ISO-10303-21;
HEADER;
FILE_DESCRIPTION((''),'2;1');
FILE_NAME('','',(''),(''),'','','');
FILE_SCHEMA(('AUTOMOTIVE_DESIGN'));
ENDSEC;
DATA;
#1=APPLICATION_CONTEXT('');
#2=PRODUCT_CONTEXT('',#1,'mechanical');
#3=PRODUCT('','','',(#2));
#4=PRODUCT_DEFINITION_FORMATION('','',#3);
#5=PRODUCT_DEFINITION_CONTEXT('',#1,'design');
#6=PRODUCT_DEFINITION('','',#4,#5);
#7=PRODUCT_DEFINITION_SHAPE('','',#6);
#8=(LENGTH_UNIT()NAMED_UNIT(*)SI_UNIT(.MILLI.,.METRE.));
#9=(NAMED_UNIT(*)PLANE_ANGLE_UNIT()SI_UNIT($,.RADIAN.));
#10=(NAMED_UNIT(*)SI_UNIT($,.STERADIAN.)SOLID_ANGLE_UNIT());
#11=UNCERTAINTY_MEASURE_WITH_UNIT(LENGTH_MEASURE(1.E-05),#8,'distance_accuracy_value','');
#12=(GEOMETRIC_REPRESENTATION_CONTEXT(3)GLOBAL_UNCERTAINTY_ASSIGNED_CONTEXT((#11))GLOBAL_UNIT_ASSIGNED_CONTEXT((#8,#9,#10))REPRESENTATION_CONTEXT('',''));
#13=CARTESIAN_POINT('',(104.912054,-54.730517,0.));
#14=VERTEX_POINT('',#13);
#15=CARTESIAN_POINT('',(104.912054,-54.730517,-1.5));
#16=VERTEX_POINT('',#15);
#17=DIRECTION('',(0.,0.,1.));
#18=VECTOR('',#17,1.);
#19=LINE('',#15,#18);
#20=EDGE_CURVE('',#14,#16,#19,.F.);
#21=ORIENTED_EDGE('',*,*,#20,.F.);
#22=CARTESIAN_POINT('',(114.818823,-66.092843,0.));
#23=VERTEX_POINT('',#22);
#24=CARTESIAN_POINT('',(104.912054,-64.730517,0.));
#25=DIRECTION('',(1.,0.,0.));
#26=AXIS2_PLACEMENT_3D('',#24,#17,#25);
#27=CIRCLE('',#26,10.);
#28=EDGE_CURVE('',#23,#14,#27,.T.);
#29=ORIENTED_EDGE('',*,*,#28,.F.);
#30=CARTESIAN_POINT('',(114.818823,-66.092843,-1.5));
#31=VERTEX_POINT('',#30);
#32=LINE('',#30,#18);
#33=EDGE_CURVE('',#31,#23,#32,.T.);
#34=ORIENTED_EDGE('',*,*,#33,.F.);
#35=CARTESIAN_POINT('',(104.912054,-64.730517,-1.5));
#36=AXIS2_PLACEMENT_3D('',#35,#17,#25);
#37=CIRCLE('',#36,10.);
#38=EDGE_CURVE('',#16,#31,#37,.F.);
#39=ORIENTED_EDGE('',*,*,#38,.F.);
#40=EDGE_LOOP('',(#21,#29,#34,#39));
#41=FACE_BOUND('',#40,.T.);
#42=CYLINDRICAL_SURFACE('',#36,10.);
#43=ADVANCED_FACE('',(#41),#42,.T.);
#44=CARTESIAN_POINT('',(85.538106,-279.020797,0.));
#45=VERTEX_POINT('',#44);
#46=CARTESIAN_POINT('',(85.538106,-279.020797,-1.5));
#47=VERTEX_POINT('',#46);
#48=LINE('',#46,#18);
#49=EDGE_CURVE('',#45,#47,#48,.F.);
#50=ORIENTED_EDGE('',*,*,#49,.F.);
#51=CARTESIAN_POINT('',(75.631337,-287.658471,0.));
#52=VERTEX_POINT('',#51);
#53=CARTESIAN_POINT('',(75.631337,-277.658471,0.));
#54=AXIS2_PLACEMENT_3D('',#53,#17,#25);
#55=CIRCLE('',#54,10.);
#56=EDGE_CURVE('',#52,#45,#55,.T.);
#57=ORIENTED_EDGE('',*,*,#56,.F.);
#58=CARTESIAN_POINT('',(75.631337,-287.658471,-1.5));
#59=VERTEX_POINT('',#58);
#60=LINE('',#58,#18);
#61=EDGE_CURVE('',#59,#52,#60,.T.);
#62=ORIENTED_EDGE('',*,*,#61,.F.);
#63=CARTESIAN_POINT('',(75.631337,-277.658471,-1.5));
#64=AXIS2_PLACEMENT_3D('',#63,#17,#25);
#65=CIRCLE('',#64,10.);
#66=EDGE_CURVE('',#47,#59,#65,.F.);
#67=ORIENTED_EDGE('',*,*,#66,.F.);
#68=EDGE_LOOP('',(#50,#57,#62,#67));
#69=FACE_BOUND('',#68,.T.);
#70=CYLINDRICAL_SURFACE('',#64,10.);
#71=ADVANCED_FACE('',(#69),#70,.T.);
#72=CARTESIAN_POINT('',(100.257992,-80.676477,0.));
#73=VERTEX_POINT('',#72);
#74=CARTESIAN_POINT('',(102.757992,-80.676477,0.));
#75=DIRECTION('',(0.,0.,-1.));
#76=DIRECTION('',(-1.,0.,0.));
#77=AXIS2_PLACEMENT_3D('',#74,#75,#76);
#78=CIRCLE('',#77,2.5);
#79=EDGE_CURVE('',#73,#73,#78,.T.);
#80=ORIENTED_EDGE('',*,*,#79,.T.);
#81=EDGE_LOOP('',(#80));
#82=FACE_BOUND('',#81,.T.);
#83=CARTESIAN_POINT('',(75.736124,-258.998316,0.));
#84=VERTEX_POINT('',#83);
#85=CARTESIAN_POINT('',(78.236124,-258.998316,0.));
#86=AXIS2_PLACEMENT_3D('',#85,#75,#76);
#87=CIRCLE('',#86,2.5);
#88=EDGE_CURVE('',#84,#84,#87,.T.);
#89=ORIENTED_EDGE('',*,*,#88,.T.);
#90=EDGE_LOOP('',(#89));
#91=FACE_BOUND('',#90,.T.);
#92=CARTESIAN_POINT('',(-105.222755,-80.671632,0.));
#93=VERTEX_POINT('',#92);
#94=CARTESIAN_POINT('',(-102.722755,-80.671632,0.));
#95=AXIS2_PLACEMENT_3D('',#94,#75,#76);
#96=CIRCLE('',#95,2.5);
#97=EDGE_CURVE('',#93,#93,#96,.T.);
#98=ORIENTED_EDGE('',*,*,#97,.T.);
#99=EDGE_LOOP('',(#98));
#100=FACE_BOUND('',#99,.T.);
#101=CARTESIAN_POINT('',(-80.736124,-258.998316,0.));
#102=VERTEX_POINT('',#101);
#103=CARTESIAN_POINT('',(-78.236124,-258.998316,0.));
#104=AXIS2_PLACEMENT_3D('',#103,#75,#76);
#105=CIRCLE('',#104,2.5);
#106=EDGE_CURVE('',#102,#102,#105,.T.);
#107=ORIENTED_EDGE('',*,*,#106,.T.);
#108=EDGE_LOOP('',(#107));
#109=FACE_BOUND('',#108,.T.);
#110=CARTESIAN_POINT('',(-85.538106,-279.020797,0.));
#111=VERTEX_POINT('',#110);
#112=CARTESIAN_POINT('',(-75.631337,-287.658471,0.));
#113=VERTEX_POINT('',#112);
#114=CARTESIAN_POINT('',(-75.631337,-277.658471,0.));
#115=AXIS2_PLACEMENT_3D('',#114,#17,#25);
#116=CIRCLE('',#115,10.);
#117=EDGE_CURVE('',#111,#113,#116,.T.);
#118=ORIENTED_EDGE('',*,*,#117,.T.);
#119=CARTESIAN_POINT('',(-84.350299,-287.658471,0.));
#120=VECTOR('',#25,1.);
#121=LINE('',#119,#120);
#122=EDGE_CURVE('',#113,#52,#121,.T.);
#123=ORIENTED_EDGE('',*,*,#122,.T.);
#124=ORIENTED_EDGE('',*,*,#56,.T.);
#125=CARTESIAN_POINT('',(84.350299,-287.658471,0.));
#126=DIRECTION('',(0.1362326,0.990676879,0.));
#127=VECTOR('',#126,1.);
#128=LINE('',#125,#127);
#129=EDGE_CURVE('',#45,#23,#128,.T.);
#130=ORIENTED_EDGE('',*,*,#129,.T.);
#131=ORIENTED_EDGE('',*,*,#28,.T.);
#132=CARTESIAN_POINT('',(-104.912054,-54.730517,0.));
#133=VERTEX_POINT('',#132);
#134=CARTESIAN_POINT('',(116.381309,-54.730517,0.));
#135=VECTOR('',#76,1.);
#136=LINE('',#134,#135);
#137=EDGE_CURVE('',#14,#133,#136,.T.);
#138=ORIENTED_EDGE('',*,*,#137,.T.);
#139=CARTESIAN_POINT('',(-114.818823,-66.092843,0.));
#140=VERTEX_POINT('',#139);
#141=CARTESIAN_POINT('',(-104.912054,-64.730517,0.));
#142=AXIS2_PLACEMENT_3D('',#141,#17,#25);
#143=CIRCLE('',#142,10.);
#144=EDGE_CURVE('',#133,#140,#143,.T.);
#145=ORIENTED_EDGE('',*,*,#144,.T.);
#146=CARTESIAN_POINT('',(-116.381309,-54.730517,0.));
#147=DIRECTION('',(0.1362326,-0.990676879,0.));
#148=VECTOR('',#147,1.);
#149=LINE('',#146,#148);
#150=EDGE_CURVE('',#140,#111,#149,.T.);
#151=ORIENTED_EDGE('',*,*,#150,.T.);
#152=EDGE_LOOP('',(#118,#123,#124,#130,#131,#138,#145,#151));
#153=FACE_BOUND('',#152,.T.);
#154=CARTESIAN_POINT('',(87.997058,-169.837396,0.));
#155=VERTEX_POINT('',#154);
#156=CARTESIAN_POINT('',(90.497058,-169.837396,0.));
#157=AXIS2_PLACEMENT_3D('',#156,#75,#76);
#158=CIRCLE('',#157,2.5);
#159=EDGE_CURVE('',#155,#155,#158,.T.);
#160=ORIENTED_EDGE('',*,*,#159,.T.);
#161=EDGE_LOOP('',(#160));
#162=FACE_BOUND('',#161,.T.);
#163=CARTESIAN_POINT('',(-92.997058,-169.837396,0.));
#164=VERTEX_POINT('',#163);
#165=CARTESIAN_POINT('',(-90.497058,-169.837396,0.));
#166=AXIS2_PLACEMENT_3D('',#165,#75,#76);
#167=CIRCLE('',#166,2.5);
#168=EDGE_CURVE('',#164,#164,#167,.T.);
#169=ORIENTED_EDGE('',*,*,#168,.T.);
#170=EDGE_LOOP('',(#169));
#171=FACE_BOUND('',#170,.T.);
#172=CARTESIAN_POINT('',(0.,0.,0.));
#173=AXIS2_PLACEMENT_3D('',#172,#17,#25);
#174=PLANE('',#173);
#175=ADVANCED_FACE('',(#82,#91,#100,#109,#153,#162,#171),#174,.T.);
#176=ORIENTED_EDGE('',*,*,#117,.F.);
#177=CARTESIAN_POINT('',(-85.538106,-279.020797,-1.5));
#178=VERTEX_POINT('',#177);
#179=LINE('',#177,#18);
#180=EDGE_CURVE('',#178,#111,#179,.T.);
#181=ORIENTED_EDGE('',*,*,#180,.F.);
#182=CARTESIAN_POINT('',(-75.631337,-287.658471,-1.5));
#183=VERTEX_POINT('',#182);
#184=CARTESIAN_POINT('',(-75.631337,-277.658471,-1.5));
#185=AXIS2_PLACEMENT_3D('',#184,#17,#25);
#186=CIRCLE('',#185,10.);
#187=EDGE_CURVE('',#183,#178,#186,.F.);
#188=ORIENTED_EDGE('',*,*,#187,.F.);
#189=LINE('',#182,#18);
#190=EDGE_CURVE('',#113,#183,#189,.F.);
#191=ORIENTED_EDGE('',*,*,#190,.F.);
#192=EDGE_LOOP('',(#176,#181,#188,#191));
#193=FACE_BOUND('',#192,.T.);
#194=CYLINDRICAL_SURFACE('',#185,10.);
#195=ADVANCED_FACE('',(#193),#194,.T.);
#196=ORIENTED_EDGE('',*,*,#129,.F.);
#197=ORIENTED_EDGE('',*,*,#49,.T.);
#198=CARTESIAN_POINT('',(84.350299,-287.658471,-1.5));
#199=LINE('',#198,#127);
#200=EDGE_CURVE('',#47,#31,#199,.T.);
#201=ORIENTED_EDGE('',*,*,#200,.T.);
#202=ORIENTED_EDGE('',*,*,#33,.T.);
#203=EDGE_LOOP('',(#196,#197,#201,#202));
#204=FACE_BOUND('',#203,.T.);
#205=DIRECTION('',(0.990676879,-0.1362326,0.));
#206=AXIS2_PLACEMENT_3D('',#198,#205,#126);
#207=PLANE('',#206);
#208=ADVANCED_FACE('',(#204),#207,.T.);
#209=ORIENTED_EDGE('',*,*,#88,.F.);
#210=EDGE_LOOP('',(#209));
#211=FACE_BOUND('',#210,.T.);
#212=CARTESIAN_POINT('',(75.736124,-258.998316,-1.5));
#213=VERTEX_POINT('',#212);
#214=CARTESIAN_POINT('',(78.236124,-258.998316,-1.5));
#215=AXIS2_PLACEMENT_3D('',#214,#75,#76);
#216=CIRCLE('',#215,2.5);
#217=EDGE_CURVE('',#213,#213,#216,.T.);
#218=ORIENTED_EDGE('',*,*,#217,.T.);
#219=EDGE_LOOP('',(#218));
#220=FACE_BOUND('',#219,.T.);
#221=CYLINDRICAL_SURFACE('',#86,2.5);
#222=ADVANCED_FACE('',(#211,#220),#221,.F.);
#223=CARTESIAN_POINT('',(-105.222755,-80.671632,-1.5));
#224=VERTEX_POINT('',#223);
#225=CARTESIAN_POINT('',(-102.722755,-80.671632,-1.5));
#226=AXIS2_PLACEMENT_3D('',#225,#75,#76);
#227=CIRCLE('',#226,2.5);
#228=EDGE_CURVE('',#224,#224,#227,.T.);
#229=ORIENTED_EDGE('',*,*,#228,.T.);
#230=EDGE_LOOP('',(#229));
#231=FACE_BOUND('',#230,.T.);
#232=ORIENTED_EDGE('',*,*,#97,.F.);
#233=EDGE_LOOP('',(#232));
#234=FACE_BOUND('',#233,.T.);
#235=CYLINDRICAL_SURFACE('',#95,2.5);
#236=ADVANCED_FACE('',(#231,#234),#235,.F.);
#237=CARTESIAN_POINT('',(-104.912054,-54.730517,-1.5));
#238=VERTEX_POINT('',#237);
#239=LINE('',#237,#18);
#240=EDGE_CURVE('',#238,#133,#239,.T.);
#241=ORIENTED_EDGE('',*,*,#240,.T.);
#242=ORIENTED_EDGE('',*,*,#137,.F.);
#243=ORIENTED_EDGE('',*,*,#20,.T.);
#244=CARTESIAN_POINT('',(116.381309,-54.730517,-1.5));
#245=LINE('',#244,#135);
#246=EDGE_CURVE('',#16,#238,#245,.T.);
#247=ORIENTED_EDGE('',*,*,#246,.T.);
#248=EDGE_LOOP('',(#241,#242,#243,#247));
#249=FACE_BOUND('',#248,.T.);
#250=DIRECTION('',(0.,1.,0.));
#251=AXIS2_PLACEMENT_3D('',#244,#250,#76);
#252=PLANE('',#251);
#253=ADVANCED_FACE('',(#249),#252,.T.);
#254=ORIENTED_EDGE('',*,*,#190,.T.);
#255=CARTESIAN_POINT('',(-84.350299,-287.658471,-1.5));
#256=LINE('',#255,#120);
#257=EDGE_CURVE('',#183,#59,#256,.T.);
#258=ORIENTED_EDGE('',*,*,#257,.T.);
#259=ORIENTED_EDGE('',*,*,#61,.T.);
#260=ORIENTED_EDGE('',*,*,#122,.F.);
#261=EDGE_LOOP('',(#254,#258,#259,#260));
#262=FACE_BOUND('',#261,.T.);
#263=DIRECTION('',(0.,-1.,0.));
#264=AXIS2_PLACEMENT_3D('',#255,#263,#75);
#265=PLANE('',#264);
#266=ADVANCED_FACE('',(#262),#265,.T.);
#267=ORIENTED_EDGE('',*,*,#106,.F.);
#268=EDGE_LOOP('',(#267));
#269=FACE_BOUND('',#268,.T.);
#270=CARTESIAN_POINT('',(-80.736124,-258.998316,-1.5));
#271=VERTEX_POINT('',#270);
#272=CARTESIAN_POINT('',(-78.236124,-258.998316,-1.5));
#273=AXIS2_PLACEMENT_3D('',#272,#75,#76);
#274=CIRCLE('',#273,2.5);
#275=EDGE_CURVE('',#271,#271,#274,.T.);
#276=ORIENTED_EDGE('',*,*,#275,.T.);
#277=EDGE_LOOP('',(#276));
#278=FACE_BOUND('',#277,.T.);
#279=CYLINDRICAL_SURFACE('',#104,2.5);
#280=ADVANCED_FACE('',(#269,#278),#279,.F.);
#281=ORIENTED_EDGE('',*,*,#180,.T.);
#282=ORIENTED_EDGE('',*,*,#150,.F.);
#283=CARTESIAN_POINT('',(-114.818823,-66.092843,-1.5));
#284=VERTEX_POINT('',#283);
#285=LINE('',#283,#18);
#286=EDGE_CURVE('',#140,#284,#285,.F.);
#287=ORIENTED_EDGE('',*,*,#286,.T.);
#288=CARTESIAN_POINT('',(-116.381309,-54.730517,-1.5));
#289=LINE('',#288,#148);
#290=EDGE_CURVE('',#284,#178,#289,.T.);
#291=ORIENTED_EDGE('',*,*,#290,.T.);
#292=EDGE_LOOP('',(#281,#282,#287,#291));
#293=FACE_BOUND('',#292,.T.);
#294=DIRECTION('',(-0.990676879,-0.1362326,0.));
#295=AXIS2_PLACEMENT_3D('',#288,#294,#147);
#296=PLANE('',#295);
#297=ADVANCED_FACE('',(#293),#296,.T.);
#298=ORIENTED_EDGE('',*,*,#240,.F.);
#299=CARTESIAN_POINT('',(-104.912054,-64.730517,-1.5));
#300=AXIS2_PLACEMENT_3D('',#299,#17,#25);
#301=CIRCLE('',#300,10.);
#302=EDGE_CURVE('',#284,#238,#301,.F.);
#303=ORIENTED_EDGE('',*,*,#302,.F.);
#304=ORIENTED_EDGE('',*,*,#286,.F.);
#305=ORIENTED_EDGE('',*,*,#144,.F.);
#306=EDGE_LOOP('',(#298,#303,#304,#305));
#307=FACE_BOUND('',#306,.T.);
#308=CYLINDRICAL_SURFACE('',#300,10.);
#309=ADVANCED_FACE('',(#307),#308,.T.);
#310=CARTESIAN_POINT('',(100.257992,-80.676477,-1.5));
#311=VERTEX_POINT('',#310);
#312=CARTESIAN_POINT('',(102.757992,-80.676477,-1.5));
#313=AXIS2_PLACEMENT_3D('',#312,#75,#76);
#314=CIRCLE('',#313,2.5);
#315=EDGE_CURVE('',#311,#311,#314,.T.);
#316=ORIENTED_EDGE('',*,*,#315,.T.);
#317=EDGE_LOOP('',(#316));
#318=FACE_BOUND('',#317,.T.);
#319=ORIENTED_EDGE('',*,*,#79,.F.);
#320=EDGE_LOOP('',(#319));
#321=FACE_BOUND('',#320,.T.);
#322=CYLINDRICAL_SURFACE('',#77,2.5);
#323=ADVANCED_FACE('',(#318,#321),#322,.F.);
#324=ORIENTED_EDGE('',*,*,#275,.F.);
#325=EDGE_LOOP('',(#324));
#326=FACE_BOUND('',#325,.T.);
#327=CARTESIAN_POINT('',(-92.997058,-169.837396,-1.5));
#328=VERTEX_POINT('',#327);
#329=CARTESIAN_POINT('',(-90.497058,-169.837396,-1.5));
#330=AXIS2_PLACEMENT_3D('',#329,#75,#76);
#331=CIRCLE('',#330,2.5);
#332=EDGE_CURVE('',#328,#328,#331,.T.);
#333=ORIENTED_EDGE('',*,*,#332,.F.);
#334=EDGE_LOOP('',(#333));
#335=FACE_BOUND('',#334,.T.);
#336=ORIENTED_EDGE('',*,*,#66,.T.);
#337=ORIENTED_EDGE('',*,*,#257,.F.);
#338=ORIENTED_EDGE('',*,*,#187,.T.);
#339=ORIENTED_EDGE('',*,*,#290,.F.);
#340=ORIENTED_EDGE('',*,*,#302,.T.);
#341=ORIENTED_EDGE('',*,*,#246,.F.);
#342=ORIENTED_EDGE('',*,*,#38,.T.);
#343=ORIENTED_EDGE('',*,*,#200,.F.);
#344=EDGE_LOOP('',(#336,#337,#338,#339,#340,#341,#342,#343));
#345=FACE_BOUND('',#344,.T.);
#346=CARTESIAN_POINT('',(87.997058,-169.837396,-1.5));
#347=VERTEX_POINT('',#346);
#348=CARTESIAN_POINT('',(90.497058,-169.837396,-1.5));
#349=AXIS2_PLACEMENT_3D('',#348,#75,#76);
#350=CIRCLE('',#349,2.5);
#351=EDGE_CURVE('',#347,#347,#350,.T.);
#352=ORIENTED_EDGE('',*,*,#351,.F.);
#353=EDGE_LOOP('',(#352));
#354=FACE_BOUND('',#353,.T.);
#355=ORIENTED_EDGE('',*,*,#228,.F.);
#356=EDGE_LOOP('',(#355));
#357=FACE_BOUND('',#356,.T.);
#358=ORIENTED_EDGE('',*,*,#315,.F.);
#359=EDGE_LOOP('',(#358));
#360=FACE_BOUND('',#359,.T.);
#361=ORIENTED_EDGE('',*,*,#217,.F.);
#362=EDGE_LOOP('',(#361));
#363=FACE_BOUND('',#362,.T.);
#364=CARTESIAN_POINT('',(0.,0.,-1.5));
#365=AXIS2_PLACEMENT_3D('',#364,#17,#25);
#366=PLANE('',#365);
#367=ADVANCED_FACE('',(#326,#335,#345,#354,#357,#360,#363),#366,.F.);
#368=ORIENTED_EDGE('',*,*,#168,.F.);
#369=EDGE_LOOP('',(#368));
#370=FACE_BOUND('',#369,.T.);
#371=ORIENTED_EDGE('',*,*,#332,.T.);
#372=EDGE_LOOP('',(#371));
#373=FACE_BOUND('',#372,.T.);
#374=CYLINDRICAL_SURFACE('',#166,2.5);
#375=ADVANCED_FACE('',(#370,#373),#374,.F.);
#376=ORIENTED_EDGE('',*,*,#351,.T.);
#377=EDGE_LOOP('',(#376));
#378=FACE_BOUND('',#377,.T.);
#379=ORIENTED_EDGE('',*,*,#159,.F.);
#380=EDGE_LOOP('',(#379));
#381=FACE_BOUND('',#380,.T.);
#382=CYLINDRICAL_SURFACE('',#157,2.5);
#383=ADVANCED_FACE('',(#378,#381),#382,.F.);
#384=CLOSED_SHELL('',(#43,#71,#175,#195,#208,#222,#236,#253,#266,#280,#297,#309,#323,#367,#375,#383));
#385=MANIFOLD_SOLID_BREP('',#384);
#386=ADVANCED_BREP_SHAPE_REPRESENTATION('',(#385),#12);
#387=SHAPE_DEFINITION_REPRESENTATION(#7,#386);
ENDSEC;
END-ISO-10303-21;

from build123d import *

# Parameters (mm, degrees)
BASE_FLANGE1_DEPTH = 1.5
FILLET1_R          = 10
SKETCH6_R          = 2.5
CUT_EXTRUDE1_DEPTH = 10


# Sheet-metal steps are written as plain solids
with BuildPart() as part:
    # Sketch1 → Base-Flange1 (new body)
    with BuildSketch(Plane.XY):
        Polygon((116.381309109, -54.730517105), (-116.381309109, -54.730517105), (-84.350299428, -287.658470614), (84.350299428, -287.658470614), align=None)
    extrude(amount=-BASE_FLANGE1_DEPTH)

    # Fillet1
    fillet1_edges = [part.edges().sort_by_distance(p)[0] for p in [
        (84.350299428, -287.658470614, -0.75),
        (-84.350299428, -287.658470614, -0.75),
        (-116.381309109, -54.730517105, -0.75),
        (116.381309109, -54.730517105, -0.75),
    ]]
    fillet(fillet1_edges, radius=FILLET1_R)

    # Sketch6 → Cut-Extrude1 (cut)
    with BuildSketch(Plane(origin=(0, 0, -1.5), x_dir=(-1, 0, 0), z_dir=(0, 0, -1))):
        with Locations((-102.757991697, -80.676477358)):
            Circle(SKETCH6_R)
        with Locations((-90.497057702, -169.837396474)):
            Circle(SKETCH6_R)
        with Locations((-78.236123708, -258.99831559)):
            Circle(SKETCH6_R)
        with Locations((102.722754997, -80.671631795)):
            Circle(SKETCH6_R)
        with Locations((90.497057702, -169.837396474)):
            Circle(SKETCH6_R)
        with Locations((78.236123708, -258.99831559)):
            Circle(SKETCH6_R)
    extrude(amount=-CUT_EXTRUDE1_DEPTH, mode=Mode.SUBTRACT)


solid = part.part
